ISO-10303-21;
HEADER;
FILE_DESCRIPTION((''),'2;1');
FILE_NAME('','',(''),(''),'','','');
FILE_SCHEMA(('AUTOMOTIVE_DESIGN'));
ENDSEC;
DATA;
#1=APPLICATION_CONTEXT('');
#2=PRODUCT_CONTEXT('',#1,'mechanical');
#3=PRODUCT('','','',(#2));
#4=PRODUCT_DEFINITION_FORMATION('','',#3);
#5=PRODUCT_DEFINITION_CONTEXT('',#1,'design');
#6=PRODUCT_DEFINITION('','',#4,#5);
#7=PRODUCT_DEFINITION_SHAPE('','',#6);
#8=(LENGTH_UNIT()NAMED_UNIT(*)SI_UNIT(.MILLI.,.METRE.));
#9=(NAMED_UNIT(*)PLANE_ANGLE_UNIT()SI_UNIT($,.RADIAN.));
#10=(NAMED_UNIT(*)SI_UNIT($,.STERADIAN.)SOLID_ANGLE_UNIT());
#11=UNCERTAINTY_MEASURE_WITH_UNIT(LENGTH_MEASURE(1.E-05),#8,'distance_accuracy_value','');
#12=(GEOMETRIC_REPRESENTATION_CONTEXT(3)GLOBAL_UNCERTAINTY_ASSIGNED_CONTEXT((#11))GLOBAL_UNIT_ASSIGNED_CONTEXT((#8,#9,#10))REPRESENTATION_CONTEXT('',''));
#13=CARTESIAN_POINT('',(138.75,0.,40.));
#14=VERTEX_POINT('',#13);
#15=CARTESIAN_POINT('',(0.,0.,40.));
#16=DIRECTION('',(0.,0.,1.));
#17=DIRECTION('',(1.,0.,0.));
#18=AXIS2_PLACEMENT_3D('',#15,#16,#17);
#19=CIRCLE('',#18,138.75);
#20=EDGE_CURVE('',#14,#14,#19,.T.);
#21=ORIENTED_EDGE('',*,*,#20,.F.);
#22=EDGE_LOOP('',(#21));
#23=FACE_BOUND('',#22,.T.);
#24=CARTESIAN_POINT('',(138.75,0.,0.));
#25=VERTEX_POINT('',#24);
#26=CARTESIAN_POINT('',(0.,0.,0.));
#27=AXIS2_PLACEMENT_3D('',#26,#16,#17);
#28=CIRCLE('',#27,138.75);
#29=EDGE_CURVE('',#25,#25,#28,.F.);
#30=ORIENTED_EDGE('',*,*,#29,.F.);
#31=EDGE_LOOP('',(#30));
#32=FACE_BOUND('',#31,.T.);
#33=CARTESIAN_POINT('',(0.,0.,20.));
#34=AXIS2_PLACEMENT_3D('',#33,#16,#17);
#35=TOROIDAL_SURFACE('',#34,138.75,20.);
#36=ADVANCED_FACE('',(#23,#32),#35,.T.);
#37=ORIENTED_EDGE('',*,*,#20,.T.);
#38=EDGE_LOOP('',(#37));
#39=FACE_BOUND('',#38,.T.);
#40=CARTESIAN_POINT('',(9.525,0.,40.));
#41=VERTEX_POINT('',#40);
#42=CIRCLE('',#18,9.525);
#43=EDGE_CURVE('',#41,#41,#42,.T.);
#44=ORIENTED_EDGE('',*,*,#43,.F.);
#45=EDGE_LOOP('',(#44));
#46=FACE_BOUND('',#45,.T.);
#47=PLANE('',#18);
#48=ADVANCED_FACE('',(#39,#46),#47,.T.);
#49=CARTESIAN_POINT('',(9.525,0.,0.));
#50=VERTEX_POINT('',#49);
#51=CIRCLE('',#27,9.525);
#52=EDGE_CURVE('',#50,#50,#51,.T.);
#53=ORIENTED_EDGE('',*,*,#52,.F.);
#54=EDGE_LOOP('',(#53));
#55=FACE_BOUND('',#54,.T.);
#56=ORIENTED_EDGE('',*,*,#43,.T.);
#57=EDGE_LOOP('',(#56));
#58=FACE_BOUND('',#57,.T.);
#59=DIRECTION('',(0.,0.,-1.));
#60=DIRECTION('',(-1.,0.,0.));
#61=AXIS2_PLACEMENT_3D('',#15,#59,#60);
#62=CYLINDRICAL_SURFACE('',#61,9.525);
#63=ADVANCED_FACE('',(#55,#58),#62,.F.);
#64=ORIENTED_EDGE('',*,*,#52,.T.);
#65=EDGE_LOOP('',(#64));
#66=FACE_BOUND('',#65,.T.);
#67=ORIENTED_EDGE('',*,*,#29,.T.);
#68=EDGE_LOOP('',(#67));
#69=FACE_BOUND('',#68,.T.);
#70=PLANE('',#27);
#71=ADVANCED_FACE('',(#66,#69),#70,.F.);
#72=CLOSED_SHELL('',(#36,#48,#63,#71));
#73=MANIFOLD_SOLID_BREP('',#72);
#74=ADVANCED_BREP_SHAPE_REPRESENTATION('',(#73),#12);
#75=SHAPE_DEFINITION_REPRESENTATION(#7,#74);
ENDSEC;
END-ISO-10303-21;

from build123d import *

# Parameters (mm, degrees)
SKETCH1_R           = 158.75
SKETCH1_R_2         = 9.525
BOSS_EXTRUDE1_DEPTH = 40
FILLET1_R           = 20


with BuildPart() as part:
    # Sketch1 → Boss-Extrude1 (new body)
    with BuildSketch(Plane.XY):
        Circle(SKETCH1_R)
        Circle(SKETCH1_R_2, mode=Mode.SUBTRACT)
    extrude(amount=BOSS_EXTRUDE1_DEPTH)

    # Fillet1
    fillet1_edges = [part.edges().sort_by_distance(p)[0] for p in [
        (-158.75, 0, 0),
        (-158.75, 0, 40),
    ]]
    fillet(fillet1_edges, radius=FILLET1_R - 0.0001)  # a hair under: the kernel refuses the full size


solid = part.part
